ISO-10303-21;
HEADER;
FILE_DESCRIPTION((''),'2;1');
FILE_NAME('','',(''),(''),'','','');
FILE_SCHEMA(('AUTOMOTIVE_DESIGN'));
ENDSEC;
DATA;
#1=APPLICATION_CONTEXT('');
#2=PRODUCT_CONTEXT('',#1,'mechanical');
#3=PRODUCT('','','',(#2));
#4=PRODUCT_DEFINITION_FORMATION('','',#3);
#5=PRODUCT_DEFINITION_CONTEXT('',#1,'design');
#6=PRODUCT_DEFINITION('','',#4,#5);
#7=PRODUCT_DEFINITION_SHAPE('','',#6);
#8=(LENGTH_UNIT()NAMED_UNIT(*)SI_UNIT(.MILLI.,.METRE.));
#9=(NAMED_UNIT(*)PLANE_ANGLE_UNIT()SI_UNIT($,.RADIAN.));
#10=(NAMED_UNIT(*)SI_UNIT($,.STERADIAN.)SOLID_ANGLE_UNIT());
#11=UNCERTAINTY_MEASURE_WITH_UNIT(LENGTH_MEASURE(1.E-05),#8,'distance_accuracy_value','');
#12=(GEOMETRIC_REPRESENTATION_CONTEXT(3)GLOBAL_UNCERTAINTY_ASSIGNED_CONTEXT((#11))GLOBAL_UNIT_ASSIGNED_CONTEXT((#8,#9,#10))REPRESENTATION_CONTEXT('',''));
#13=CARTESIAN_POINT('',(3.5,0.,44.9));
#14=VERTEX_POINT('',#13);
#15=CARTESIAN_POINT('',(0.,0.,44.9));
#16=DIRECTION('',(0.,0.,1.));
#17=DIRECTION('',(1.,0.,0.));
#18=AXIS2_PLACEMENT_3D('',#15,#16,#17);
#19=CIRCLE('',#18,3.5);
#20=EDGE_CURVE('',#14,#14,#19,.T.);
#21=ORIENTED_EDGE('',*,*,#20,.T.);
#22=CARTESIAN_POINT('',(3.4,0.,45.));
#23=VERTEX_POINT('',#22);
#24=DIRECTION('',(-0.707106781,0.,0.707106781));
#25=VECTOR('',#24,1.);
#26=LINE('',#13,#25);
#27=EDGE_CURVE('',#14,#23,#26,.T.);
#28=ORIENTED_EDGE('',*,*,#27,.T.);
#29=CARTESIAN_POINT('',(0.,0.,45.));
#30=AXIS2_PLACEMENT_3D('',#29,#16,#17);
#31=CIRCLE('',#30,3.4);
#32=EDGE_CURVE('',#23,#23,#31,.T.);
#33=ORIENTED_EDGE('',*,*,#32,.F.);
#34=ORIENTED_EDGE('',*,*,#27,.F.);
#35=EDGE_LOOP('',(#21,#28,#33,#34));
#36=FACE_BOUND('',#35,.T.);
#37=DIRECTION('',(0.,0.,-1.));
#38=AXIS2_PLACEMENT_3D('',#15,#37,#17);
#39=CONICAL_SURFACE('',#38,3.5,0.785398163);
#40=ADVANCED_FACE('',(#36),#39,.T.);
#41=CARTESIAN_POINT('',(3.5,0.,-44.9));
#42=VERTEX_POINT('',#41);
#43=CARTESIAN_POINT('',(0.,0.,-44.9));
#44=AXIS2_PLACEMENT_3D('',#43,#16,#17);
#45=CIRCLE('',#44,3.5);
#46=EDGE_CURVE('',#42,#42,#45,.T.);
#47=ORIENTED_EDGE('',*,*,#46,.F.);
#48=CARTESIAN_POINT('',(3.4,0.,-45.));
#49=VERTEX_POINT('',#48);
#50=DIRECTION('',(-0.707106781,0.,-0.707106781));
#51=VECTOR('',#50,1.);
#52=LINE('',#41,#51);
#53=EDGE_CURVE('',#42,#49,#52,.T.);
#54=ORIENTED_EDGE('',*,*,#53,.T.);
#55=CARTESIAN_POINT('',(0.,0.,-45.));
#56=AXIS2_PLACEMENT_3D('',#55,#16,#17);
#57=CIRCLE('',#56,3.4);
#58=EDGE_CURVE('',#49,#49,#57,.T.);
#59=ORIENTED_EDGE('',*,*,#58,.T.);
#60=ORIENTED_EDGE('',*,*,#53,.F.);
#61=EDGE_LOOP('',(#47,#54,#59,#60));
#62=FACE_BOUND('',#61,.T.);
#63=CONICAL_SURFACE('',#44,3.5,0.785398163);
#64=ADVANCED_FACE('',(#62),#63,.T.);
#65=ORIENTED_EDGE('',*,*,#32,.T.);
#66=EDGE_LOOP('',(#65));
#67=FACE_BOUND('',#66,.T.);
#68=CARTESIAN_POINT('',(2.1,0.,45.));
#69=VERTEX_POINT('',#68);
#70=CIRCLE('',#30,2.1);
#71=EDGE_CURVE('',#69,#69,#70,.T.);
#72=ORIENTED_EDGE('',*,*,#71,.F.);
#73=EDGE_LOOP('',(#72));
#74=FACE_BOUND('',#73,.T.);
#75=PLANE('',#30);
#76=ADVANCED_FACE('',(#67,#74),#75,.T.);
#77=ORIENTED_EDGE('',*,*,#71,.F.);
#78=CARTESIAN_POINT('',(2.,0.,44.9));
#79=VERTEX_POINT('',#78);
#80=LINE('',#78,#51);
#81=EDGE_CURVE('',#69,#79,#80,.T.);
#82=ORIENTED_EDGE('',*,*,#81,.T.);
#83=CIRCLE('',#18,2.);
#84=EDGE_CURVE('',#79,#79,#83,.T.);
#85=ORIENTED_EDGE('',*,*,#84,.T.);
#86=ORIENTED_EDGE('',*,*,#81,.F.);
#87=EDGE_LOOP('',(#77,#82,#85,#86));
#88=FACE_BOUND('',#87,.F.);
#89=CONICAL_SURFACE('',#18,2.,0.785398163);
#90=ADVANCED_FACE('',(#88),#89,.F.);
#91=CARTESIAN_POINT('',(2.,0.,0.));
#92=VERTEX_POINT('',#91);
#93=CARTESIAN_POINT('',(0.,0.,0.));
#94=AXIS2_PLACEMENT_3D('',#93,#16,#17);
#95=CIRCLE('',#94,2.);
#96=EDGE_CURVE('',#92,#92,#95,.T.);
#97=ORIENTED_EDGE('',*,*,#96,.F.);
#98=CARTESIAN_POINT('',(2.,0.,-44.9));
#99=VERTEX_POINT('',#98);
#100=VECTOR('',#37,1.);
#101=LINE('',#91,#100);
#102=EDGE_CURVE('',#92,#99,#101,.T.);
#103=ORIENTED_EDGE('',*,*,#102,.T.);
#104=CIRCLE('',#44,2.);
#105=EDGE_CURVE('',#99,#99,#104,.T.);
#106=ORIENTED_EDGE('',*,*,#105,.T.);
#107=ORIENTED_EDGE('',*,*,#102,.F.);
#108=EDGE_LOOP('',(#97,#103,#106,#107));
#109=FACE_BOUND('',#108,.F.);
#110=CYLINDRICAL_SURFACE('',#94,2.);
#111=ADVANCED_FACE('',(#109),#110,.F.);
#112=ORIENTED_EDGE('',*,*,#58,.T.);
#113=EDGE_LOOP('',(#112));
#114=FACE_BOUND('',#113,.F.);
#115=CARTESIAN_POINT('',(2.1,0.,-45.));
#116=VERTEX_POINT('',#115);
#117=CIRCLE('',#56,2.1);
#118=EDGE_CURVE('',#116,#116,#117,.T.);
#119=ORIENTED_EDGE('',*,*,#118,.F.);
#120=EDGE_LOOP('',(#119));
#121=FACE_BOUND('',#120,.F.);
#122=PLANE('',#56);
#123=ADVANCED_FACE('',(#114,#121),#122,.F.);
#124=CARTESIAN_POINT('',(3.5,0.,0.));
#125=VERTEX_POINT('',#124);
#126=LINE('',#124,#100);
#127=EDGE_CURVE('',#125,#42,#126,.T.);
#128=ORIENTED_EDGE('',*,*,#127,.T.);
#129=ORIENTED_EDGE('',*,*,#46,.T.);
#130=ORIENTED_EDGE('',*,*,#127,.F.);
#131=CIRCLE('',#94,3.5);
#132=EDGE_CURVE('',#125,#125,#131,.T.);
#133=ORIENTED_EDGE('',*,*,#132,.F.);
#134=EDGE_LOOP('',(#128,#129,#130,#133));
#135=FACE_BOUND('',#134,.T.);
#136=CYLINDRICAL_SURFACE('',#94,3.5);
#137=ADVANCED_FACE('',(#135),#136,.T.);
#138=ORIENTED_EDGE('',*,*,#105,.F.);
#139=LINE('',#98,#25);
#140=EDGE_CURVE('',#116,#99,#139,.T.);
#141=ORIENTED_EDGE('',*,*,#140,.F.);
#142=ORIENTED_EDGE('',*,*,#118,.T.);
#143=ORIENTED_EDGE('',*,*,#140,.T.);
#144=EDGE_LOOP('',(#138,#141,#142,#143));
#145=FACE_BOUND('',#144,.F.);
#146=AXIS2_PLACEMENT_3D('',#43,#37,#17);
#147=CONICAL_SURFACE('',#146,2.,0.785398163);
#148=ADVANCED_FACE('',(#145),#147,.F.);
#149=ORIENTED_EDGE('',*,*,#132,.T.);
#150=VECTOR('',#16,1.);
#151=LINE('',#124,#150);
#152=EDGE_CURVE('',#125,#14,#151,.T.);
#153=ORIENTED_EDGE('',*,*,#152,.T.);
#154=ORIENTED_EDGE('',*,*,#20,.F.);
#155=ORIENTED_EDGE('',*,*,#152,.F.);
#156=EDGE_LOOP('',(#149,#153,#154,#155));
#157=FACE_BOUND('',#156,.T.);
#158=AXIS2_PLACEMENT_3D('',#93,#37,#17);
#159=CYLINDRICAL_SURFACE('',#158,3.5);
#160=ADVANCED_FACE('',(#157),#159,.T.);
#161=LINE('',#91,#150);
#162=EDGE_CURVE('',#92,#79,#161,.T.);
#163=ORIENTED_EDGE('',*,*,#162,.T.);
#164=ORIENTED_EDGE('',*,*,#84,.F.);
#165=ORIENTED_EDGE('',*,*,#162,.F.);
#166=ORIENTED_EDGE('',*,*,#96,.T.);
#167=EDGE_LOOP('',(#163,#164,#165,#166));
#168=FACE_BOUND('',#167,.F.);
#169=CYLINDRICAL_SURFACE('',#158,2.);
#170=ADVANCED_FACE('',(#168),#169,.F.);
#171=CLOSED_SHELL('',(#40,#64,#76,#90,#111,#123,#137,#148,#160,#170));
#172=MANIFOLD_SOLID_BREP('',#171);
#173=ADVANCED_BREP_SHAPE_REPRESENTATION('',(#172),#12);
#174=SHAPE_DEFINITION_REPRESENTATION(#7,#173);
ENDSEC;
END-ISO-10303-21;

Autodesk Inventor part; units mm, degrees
ref_plane "YZ Plane" through (0, 0, 0) normal (1, 0, 0) x (0, 1, 0)
ref_plane "XZ Plane" through (0, 0, 0) normal (0, 1, 0) x (-1, 0, 0)
ref_plane "XY Plane" through (0, 0, 0) normal (0, 0, 1) x (1, 0, 0)
sketch "Sketch1" plane through (0, 0, 0) normal (0, 0, 1) x (1, 0, 0)
  circle A0 centre (0, 0) radius 3.5
  circle A1 centre (0, 0) radius 2
  dimension "d0" = 7
  dimension "d1" = 4
extrude "Extrusion1" add sketch "Sketch1" along normal mid plane 90
thread "Thread1" size "M4x0.7" class "6H" standard "ANSI Metric M Profile" length 10
thread "Thread2" size "M4x0.7" class "6H" standard "ANSI Metric M Profile" length 10
chamfer "Chamfer1" distance 0.1 angle 45 4 edges at (-3.5, 0, 45) (-2, 0, 45) (-2, 0, -45) (-3.5, 0, -45)
properties part number "M4 90mm Standoff" material "Aluminum 6061"
